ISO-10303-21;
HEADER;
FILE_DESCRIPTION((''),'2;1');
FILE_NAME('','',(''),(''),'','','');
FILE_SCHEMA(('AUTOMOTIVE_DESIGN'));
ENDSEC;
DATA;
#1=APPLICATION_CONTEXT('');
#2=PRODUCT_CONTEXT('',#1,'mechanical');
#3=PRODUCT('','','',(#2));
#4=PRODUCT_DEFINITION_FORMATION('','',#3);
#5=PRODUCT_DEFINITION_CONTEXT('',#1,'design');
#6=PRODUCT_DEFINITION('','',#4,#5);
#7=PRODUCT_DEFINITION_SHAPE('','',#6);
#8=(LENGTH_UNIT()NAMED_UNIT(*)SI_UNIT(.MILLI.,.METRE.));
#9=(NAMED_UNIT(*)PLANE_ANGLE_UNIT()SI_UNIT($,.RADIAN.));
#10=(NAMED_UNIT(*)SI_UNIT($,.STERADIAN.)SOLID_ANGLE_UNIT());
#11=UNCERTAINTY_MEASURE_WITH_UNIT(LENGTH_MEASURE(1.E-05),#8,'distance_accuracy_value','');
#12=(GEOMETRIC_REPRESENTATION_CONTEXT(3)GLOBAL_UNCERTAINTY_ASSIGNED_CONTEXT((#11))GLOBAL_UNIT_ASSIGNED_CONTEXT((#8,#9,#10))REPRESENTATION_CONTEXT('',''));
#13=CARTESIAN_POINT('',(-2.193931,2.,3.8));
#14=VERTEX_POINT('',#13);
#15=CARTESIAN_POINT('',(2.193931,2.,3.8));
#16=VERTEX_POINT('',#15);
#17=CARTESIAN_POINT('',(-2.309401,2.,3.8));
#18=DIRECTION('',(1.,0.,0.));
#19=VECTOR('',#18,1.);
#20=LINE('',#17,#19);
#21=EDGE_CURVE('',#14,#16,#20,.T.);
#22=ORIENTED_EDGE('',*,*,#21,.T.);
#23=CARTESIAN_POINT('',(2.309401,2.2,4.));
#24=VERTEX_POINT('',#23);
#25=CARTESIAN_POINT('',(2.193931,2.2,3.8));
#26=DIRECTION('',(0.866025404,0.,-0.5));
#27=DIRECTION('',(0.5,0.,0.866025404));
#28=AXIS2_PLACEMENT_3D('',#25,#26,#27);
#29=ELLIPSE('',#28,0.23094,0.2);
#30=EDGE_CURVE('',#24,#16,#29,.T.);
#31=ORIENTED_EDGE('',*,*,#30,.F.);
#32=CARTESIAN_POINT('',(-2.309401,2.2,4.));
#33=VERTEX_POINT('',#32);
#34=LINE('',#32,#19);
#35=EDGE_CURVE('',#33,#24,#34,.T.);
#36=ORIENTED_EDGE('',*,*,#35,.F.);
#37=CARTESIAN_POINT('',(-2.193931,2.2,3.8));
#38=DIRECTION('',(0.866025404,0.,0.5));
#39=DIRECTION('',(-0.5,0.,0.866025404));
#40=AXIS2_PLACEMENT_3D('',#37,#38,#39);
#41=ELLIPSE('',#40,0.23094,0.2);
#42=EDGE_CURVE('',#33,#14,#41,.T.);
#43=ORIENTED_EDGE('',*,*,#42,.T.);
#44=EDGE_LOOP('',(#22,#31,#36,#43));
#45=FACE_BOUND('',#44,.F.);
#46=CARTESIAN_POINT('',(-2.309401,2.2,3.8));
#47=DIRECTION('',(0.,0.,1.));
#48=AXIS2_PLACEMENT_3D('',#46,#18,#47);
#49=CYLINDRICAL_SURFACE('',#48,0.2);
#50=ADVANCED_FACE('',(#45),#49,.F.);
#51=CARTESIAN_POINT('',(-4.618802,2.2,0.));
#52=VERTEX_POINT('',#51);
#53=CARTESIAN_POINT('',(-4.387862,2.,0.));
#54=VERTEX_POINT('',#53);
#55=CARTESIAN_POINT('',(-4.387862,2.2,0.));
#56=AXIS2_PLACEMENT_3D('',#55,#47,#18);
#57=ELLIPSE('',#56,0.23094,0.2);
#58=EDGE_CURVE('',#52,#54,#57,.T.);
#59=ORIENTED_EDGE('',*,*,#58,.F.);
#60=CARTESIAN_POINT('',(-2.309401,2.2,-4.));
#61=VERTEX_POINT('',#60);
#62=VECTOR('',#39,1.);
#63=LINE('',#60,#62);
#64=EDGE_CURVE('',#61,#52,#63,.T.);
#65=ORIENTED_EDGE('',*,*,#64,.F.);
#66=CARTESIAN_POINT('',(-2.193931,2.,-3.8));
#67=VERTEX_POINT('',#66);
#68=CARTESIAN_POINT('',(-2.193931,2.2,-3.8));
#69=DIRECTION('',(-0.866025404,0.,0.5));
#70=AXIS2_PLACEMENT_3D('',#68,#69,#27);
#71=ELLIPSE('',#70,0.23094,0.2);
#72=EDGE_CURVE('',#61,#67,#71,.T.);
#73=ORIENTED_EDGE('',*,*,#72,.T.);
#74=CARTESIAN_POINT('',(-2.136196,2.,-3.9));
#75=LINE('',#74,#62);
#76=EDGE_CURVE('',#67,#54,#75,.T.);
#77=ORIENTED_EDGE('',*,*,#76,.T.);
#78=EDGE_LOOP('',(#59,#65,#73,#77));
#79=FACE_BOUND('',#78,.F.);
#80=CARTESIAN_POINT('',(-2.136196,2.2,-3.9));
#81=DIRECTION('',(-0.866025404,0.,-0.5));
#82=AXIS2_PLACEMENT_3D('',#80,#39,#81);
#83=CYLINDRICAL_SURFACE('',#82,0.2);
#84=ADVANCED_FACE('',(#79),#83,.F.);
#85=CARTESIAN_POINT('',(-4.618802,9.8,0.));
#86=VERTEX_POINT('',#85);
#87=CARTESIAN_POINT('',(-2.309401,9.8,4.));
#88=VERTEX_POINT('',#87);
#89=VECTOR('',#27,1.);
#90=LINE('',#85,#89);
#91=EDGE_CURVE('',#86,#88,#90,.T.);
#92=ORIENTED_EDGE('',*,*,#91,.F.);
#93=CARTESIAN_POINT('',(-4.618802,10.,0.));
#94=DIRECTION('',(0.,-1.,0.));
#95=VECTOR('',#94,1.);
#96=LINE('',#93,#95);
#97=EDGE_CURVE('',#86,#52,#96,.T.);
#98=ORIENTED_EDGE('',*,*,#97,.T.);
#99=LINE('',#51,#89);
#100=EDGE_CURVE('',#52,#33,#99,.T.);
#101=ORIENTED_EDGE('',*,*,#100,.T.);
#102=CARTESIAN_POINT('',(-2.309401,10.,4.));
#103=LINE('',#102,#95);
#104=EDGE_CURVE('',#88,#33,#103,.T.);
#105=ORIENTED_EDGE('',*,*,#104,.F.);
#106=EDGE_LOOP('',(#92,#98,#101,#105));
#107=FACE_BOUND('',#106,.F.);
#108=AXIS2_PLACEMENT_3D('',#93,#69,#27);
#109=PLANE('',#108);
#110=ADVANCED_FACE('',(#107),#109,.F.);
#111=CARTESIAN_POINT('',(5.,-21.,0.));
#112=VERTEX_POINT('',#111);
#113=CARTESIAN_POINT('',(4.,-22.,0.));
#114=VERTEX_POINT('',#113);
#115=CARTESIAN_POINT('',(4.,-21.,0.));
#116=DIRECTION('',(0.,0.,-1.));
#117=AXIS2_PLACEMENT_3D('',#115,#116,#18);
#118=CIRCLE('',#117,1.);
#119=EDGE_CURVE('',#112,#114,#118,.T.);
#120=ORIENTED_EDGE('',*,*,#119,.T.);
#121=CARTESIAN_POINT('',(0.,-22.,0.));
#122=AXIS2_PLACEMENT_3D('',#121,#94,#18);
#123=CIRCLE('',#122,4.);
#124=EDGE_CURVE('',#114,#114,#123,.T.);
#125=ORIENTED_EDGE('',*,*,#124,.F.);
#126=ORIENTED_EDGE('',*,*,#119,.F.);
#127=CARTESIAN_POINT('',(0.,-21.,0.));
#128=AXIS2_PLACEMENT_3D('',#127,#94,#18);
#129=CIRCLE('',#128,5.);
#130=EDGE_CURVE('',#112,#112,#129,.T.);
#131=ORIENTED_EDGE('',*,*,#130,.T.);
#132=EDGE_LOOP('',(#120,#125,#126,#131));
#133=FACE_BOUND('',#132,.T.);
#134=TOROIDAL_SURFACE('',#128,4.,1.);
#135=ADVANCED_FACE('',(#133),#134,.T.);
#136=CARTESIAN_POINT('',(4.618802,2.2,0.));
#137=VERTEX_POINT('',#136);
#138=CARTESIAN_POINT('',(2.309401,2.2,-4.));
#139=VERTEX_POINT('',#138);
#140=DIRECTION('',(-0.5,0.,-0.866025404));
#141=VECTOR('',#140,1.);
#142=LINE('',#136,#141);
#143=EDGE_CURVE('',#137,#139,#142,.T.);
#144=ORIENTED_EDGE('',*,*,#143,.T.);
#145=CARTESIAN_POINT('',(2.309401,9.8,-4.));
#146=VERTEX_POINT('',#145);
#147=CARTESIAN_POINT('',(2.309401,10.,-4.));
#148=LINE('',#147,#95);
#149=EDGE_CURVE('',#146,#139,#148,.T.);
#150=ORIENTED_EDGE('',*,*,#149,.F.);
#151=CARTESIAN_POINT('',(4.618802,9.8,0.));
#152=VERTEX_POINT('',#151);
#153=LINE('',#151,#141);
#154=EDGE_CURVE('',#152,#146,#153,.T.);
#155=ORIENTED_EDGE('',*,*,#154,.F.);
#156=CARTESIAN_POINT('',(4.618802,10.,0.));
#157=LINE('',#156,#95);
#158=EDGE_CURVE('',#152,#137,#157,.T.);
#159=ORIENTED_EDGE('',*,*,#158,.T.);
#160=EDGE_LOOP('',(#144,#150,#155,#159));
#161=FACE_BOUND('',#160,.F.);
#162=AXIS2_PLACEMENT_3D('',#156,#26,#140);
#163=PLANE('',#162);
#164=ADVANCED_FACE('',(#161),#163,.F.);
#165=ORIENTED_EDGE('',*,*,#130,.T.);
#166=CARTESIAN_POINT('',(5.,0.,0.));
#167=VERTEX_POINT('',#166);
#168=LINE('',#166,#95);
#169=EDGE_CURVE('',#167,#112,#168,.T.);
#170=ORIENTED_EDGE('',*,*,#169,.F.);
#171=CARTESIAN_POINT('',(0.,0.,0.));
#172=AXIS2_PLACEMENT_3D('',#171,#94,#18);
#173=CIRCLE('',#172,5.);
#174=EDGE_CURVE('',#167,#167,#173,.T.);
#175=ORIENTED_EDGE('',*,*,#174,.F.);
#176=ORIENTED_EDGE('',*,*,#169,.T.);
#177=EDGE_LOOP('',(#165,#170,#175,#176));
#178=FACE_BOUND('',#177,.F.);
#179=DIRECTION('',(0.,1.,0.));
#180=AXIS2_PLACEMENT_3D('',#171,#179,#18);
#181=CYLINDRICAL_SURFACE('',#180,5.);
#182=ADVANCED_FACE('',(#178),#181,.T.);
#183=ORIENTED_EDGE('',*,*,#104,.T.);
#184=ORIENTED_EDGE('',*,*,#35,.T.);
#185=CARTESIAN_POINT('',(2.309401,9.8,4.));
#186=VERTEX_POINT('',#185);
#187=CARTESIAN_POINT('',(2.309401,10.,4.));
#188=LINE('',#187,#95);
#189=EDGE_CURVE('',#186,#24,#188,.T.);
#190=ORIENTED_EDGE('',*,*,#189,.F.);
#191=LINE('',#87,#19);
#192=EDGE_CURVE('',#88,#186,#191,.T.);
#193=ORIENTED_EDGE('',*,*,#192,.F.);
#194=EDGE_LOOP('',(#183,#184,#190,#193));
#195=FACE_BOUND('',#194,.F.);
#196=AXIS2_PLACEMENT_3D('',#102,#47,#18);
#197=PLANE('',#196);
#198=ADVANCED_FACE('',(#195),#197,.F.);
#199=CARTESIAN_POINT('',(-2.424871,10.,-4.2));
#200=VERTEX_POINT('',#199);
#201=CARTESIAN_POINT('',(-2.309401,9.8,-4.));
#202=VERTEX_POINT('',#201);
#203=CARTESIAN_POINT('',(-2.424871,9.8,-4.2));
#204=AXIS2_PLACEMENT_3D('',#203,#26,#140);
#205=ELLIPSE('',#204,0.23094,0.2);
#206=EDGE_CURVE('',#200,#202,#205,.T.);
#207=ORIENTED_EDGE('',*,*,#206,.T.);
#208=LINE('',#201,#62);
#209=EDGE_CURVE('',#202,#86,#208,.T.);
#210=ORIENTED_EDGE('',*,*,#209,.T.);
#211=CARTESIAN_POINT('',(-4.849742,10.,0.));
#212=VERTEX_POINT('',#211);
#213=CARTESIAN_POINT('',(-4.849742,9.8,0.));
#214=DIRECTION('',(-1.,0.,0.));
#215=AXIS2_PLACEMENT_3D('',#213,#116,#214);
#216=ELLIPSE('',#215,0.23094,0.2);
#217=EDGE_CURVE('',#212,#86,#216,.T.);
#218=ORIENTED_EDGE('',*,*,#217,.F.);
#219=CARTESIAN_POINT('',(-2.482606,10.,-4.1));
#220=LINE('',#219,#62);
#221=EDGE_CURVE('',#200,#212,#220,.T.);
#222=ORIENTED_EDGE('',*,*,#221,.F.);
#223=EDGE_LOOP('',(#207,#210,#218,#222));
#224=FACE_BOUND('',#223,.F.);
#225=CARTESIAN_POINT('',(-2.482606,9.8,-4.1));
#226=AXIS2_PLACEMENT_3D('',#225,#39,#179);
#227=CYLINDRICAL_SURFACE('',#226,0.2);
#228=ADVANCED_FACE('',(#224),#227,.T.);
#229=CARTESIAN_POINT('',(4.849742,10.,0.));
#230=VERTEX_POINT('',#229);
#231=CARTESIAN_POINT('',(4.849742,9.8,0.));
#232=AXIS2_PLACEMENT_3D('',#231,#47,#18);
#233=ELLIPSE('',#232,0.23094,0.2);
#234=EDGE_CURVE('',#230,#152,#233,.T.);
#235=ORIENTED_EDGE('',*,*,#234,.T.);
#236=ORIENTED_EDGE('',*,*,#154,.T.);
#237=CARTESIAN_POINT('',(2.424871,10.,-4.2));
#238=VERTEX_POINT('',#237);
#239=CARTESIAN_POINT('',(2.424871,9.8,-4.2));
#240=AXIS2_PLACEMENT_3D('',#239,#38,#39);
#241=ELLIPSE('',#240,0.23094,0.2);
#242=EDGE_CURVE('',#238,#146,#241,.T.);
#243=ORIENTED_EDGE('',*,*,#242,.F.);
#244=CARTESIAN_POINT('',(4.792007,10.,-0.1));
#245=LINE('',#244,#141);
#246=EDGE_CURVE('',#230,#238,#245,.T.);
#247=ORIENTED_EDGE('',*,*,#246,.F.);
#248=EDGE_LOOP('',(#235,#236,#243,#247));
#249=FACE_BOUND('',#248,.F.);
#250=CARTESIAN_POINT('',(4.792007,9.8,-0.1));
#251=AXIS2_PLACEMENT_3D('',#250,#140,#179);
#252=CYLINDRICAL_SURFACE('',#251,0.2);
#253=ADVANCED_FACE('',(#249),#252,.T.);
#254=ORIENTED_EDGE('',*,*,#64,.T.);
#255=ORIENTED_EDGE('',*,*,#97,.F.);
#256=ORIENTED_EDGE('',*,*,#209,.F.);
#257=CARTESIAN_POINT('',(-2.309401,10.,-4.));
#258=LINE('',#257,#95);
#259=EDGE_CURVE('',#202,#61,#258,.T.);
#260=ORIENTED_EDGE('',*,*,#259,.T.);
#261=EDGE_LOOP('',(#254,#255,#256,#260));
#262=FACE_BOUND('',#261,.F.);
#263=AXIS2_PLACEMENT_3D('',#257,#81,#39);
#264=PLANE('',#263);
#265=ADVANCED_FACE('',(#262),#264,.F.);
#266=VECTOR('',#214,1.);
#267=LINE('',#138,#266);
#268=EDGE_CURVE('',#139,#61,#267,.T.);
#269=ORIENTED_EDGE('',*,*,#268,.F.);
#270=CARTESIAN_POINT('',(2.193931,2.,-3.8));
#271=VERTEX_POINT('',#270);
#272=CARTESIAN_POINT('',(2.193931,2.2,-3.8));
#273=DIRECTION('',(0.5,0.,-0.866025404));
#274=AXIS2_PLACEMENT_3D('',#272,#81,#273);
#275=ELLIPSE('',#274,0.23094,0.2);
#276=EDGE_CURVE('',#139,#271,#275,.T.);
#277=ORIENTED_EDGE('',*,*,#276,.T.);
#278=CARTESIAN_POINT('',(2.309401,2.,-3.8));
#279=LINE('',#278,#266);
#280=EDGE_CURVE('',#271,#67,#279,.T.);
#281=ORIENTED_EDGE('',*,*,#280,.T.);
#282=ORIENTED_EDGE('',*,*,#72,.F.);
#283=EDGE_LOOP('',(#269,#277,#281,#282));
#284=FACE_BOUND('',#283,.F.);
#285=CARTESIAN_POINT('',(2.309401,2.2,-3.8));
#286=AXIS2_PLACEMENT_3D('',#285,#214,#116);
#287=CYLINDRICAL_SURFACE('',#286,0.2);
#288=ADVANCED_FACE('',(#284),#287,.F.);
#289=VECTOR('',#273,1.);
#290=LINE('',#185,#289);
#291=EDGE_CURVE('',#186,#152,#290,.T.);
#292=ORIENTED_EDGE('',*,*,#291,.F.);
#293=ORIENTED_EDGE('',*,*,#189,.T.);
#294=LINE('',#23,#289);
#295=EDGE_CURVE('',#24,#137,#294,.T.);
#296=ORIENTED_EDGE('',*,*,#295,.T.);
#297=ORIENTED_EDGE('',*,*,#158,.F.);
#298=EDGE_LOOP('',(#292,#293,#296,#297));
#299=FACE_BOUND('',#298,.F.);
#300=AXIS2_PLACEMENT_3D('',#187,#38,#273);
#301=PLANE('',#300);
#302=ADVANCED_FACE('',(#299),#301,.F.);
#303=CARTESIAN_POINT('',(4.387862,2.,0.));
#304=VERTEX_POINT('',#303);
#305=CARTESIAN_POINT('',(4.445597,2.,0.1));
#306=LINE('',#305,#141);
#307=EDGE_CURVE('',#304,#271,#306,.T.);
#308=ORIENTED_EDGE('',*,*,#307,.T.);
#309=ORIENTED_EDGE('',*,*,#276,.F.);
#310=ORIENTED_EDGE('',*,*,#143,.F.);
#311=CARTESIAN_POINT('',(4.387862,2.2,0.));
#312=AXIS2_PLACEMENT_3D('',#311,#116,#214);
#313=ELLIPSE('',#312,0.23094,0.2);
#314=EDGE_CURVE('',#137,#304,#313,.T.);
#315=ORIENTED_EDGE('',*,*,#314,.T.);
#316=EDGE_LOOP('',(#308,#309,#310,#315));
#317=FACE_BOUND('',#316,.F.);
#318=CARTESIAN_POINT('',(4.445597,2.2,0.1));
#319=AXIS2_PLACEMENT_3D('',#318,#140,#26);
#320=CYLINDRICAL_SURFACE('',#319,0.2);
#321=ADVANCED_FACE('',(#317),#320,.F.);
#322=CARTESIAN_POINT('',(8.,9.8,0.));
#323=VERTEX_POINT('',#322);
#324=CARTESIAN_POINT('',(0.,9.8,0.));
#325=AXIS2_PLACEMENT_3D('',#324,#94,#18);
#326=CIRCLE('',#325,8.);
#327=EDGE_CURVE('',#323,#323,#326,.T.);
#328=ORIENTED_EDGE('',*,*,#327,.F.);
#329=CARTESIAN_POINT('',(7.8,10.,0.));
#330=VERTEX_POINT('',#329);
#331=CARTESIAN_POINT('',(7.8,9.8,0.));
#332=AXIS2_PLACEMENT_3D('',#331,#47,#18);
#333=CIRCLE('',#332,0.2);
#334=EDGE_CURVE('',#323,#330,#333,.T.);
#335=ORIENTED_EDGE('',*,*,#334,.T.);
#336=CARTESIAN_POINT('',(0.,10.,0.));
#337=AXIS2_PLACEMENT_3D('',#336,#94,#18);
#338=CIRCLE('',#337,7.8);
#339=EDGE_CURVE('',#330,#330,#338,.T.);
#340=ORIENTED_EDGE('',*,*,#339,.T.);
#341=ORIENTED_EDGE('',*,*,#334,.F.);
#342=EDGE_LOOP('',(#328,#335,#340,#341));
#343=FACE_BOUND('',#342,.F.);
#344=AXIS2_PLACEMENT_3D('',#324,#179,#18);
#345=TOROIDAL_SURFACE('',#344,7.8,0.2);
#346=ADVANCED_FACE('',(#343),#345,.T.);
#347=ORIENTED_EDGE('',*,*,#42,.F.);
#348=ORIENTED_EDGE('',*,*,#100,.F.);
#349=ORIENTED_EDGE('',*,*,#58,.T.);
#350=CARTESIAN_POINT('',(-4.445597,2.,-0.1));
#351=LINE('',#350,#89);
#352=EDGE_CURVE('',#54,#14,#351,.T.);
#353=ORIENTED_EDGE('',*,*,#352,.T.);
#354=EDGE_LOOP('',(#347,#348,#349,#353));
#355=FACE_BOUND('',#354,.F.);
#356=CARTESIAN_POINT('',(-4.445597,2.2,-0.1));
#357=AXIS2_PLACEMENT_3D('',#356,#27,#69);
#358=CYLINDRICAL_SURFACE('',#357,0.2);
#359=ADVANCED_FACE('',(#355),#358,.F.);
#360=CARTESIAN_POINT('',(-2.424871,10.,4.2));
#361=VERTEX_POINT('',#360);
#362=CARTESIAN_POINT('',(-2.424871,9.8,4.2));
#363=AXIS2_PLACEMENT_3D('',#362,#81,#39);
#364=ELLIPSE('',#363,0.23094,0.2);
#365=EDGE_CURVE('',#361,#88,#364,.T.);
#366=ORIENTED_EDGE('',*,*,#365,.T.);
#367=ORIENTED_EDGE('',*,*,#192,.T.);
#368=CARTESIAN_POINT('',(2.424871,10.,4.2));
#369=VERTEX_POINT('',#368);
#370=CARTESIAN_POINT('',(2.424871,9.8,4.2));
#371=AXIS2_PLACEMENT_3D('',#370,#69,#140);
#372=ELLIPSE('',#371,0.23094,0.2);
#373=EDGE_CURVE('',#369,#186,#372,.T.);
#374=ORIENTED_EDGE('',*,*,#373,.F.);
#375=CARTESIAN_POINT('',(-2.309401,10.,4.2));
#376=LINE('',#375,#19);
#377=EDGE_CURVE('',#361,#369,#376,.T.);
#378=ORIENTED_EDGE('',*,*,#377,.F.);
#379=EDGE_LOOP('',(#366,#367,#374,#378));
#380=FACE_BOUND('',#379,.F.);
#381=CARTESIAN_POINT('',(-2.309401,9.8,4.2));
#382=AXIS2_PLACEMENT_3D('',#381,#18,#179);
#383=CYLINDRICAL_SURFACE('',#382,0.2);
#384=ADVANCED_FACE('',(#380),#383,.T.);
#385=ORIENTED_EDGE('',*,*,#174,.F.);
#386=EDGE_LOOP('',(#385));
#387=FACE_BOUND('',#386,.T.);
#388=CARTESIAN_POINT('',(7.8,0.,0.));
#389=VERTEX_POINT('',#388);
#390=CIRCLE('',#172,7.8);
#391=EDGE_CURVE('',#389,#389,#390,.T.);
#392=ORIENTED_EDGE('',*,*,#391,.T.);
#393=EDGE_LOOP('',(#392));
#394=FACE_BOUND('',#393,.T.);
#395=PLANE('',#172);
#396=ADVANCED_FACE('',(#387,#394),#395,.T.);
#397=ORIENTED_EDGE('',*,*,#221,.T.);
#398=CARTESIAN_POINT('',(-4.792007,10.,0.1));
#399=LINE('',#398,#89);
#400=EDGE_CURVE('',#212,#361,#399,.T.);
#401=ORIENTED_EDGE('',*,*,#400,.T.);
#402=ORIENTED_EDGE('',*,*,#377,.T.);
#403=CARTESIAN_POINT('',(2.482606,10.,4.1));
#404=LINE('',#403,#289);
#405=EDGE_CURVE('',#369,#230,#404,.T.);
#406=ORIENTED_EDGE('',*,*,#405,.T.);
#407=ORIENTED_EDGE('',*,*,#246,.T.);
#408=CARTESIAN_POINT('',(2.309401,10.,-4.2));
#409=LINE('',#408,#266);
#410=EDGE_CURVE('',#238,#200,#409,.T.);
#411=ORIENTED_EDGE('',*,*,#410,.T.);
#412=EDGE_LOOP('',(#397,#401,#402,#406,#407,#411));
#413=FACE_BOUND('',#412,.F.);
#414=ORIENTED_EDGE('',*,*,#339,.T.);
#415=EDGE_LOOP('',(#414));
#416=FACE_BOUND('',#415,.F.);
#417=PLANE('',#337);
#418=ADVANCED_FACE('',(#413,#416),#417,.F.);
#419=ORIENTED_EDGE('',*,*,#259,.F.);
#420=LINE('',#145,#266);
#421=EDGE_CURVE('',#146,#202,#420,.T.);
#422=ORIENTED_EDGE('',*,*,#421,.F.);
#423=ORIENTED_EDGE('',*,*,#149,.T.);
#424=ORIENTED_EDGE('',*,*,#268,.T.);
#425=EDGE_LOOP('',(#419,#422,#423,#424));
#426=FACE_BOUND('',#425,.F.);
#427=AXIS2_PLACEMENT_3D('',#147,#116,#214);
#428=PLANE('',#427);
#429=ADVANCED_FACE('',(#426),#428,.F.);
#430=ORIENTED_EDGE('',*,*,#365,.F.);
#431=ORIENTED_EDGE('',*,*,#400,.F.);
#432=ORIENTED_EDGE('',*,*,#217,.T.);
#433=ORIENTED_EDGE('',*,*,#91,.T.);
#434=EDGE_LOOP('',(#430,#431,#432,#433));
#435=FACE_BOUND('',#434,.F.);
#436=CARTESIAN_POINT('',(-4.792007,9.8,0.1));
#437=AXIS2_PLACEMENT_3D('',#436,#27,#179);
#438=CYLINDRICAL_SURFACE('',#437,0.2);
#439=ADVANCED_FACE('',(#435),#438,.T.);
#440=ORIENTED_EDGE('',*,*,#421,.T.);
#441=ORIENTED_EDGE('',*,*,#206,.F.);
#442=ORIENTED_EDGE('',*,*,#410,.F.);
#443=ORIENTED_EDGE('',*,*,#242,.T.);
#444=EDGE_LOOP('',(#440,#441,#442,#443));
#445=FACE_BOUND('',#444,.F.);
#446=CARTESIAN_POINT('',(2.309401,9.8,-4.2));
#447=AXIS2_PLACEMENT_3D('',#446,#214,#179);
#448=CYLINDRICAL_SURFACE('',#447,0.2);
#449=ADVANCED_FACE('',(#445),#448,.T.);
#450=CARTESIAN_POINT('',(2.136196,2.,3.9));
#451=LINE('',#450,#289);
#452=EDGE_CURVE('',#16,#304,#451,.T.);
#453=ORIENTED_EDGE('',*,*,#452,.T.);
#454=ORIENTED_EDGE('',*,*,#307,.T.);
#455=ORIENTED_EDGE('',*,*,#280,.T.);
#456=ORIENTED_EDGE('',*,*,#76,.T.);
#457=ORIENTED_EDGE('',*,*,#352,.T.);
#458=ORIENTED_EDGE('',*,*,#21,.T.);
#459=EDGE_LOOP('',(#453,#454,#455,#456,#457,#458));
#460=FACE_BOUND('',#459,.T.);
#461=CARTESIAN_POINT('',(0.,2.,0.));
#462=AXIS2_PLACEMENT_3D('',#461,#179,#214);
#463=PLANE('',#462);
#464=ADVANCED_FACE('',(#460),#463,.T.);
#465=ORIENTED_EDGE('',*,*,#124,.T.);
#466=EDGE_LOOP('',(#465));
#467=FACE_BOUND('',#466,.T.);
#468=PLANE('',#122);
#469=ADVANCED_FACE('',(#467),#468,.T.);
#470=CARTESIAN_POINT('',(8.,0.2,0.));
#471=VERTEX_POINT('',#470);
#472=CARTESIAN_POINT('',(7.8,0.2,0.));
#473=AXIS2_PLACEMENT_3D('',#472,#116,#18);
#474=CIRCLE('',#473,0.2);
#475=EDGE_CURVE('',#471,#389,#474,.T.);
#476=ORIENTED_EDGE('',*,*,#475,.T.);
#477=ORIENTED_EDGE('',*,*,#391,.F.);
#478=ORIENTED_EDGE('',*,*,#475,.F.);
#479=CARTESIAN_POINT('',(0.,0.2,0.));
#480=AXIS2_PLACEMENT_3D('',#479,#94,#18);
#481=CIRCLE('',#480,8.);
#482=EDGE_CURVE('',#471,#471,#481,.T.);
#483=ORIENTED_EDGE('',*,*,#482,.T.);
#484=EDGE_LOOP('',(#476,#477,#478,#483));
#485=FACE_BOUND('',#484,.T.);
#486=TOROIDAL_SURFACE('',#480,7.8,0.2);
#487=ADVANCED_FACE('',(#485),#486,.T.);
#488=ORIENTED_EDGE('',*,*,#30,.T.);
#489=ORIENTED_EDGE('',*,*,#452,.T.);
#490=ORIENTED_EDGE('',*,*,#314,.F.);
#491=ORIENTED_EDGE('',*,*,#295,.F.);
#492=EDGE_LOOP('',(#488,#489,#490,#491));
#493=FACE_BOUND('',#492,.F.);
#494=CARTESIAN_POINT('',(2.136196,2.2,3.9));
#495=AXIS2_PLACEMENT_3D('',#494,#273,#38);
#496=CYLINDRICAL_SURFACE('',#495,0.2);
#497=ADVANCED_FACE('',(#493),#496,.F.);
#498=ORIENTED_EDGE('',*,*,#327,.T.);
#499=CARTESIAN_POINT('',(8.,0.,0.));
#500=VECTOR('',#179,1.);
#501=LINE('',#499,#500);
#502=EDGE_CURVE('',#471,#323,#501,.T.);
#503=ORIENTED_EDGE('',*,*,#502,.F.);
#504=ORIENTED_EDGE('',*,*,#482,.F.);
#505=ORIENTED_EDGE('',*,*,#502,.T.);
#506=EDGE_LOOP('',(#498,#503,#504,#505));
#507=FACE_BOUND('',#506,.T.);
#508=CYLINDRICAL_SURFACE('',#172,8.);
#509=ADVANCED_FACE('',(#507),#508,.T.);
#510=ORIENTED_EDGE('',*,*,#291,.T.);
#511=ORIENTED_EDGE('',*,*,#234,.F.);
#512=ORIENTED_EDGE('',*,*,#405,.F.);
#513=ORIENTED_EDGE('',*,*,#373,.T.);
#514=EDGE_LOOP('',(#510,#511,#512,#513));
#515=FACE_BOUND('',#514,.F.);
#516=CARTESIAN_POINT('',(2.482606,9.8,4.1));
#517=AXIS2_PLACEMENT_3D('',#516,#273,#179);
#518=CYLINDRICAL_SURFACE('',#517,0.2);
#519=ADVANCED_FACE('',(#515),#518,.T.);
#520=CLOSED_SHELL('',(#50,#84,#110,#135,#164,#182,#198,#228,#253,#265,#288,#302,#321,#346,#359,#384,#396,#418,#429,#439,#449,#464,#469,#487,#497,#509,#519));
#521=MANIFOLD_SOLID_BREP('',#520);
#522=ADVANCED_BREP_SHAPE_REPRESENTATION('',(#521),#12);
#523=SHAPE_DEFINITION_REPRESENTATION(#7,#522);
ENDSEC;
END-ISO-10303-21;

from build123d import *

# Parameters (mm, degrees)
F0_R     = 5
F1_DEPTH = 22
F0_R_2   = 8
F2_DEPTH = 10
F4_DEPTH = 8
F5_R     = 0.2
F6_R     = 1


# Not quite as in the source:
# - a feature names something its author has since deleted; it is built from what else it names


with BuildPart() as f1:
    # F0 (on Front) → F1 (new body)
    with BuildSketch(Plane.XZ):
        Circle(F0_R)
    extrude(amount=F1_DEPTH)

    # F0 (on Front) → F2 (join)
    with BuildSketch(Plane.XZ):
        Circle(F0_R_2)
        Circle(F0_R, mode=Mode.SUBTRACT)
        Circle(F0_R)
    extrude(amount=-F2_DEPTH)

    # F3 (on face) → F4 (cut)
    with BuildSketch(Plane(origin=(0, 10, 0), x_dir=(-1, 0, 0), z_dir=(0, 1, 0))):
        Polygon((-2.3094010768, -4), (2.3094010768, -4), (4.6188021535, 0), (2.3094010768, 4), (-2.3094010768, 4), (-4.6188021535, 0), align=None)
    extrude(amount=-F4_DEPTH, mode=Mode.SUBTRACT)

    # F5
    f5_edges = [f1.edges().sort_by_distance(p)[0] for p in [
        (-3.464102, 2, 2),
        (3.464102, 2, -2),
        (0, 2, 4),
        (0, 10, -4),
        (-3.464102, 2, -2),
        (0, 2, -4),
        (3.464102, 10, 2),
        (3.464102, 2, 2),
        (-3.464102, 10, -2),
        (-3.464102, 10, 2),
        (-8, 10, 0),
        (0, 10, 4),
        (3.464102, 10, -2),
        (-8, 0, 0),
    ]]
    fillet(f5_edges, radius=F5_R)

    # F6
    f6_edges = [f1.edges().sort_by_distance(p)[0] for p in [
        (-5, -22, 0),
    ]]
    fillet(f6_edges, radius=F6_R)


solid = f1.part
